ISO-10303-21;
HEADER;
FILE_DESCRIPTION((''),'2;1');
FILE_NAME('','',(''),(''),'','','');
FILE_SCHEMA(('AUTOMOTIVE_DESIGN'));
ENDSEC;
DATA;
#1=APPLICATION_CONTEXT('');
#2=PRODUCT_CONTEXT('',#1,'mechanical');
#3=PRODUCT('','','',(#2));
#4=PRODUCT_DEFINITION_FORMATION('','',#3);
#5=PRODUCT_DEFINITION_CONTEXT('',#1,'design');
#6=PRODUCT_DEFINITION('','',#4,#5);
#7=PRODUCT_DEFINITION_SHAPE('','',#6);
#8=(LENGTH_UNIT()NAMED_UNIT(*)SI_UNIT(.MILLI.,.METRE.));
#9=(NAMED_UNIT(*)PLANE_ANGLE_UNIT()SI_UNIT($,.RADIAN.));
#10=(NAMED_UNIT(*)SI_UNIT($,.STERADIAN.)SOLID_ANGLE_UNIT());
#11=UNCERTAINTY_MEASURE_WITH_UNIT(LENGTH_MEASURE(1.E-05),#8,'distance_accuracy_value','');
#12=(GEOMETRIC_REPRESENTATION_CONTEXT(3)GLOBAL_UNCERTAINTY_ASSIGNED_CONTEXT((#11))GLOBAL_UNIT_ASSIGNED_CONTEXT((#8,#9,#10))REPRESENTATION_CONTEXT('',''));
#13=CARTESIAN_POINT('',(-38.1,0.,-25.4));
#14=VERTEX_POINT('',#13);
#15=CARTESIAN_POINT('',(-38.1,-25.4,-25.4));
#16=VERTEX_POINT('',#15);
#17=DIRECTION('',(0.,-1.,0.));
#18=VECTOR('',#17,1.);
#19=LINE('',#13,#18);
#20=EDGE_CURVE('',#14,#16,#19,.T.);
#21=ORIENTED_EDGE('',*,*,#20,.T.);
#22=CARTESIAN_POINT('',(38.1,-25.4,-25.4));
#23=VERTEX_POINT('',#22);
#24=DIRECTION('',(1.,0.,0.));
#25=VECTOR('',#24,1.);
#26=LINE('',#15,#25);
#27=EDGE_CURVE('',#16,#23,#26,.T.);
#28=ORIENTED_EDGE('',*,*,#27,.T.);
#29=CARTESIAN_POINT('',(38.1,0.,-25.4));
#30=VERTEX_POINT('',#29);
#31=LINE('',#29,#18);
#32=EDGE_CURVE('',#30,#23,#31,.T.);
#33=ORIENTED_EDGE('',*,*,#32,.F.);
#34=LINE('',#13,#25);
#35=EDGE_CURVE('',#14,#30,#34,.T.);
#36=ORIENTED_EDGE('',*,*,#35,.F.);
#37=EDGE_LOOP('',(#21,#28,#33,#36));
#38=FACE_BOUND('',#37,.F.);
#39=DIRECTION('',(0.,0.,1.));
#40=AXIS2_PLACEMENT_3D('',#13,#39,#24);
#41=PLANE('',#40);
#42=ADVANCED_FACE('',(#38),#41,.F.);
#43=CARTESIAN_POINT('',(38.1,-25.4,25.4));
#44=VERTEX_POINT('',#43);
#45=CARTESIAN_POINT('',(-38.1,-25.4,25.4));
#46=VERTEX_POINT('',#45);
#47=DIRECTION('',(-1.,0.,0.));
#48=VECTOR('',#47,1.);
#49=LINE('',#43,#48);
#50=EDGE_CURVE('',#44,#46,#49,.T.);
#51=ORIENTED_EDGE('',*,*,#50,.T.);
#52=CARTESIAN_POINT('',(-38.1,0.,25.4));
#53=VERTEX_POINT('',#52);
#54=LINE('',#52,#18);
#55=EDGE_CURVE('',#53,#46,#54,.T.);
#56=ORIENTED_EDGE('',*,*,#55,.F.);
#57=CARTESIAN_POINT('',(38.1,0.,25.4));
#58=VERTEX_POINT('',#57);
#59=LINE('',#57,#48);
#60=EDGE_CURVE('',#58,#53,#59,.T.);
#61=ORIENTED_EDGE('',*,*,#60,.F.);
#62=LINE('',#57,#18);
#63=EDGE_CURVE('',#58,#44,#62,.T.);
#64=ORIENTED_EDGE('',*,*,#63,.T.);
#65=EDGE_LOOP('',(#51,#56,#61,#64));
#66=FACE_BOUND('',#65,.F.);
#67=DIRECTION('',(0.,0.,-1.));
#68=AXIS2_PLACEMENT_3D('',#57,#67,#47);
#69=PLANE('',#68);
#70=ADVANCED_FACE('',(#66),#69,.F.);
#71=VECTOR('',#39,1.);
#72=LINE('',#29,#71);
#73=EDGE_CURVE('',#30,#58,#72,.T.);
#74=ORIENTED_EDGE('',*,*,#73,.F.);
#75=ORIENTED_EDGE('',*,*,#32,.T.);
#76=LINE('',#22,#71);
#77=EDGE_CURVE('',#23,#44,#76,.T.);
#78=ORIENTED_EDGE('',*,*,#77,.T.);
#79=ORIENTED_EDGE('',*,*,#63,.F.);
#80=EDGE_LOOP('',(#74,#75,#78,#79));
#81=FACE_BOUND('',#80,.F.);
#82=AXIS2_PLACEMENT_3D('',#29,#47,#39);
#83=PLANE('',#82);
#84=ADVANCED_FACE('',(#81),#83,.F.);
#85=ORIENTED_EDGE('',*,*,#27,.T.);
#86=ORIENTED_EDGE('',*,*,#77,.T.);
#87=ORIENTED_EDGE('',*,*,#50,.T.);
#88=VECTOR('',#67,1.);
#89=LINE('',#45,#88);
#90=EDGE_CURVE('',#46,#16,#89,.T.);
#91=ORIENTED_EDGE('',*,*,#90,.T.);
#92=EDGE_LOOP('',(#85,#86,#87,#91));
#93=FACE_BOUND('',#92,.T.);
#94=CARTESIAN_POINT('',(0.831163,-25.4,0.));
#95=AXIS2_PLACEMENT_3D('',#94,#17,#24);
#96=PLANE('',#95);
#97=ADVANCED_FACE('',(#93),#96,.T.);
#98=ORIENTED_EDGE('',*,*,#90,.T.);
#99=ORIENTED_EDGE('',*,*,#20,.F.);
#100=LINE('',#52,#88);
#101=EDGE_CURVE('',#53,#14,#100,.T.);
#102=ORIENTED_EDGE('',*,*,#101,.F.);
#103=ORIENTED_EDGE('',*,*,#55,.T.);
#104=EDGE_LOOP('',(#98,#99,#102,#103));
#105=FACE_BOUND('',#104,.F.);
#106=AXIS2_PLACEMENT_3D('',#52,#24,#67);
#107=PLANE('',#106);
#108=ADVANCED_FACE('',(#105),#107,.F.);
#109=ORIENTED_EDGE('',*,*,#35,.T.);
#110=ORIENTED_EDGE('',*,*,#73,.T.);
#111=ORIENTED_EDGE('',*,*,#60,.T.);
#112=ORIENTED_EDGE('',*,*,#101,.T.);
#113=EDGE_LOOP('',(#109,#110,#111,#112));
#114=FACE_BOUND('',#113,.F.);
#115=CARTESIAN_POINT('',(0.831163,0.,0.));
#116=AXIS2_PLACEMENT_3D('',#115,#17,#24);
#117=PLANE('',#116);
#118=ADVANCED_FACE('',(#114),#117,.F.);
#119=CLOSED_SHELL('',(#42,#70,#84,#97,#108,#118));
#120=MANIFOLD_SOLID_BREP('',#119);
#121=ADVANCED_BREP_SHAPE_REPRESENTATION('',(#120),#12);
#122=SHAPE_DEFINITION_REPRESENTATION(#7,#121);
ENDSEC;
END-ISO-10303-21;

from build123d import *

# Parameters (mm, degrees)
F2_DEPTH = 25.4


# Not quite as in the source:
# - the program builds the solid bodies; features that only make, move or delete a surface that nothing else refers to are left out


with BuildPart() as f2:
    # F0 (on Front) → F2 (new body)
    with BuildSketch(Plane.XZ):
        with BuildLine():
            ThreePointArc((2.63e-08, -25.4), (17.9605122514, -17.9605122328), (25.4, 0))
            ThreePointArc((25.4, 0), (17.9605122427, 17.9605122416), (1.5e-09, 25.4))
            ThreePointArc((1.5e-09, 25.4), (-25.4, -1.24e-08), (2.63e-08, -25.4))
        make_face()
        with BuildLine():
            ThreePointArc((1.5e-09, 25.4), (17.9605122427, 17.9605122416), (25.4, 0))
            ThreePointArc((25.4, 0), (17.9605122514, -17.9605122328), (2.63e-08, -25.4))
            Line((2.63e-08, -25.4), (38.1, -25.4))
            Line((38.1, -25.4), (38.1, 25.4))
            Line((38.1, 25.4), (1.5e-09, 25.4))
        make_face()
        with BuildLine():
            ThreePointArc((2.63e-08, -25.4), (-25.4, -1.24e-08), (1.5e-09, 25.4))
            Line((1.5e-09, 25.4), (-38.1, 25.4))
            Line((-38.1, 25.4), (-38.1, -25.4))
            Line((-38.1, -25.4), (2.63e-08, -25.4))
        make_face()
    extrude(amount=F2_DEPTH)


solid = f2.part
